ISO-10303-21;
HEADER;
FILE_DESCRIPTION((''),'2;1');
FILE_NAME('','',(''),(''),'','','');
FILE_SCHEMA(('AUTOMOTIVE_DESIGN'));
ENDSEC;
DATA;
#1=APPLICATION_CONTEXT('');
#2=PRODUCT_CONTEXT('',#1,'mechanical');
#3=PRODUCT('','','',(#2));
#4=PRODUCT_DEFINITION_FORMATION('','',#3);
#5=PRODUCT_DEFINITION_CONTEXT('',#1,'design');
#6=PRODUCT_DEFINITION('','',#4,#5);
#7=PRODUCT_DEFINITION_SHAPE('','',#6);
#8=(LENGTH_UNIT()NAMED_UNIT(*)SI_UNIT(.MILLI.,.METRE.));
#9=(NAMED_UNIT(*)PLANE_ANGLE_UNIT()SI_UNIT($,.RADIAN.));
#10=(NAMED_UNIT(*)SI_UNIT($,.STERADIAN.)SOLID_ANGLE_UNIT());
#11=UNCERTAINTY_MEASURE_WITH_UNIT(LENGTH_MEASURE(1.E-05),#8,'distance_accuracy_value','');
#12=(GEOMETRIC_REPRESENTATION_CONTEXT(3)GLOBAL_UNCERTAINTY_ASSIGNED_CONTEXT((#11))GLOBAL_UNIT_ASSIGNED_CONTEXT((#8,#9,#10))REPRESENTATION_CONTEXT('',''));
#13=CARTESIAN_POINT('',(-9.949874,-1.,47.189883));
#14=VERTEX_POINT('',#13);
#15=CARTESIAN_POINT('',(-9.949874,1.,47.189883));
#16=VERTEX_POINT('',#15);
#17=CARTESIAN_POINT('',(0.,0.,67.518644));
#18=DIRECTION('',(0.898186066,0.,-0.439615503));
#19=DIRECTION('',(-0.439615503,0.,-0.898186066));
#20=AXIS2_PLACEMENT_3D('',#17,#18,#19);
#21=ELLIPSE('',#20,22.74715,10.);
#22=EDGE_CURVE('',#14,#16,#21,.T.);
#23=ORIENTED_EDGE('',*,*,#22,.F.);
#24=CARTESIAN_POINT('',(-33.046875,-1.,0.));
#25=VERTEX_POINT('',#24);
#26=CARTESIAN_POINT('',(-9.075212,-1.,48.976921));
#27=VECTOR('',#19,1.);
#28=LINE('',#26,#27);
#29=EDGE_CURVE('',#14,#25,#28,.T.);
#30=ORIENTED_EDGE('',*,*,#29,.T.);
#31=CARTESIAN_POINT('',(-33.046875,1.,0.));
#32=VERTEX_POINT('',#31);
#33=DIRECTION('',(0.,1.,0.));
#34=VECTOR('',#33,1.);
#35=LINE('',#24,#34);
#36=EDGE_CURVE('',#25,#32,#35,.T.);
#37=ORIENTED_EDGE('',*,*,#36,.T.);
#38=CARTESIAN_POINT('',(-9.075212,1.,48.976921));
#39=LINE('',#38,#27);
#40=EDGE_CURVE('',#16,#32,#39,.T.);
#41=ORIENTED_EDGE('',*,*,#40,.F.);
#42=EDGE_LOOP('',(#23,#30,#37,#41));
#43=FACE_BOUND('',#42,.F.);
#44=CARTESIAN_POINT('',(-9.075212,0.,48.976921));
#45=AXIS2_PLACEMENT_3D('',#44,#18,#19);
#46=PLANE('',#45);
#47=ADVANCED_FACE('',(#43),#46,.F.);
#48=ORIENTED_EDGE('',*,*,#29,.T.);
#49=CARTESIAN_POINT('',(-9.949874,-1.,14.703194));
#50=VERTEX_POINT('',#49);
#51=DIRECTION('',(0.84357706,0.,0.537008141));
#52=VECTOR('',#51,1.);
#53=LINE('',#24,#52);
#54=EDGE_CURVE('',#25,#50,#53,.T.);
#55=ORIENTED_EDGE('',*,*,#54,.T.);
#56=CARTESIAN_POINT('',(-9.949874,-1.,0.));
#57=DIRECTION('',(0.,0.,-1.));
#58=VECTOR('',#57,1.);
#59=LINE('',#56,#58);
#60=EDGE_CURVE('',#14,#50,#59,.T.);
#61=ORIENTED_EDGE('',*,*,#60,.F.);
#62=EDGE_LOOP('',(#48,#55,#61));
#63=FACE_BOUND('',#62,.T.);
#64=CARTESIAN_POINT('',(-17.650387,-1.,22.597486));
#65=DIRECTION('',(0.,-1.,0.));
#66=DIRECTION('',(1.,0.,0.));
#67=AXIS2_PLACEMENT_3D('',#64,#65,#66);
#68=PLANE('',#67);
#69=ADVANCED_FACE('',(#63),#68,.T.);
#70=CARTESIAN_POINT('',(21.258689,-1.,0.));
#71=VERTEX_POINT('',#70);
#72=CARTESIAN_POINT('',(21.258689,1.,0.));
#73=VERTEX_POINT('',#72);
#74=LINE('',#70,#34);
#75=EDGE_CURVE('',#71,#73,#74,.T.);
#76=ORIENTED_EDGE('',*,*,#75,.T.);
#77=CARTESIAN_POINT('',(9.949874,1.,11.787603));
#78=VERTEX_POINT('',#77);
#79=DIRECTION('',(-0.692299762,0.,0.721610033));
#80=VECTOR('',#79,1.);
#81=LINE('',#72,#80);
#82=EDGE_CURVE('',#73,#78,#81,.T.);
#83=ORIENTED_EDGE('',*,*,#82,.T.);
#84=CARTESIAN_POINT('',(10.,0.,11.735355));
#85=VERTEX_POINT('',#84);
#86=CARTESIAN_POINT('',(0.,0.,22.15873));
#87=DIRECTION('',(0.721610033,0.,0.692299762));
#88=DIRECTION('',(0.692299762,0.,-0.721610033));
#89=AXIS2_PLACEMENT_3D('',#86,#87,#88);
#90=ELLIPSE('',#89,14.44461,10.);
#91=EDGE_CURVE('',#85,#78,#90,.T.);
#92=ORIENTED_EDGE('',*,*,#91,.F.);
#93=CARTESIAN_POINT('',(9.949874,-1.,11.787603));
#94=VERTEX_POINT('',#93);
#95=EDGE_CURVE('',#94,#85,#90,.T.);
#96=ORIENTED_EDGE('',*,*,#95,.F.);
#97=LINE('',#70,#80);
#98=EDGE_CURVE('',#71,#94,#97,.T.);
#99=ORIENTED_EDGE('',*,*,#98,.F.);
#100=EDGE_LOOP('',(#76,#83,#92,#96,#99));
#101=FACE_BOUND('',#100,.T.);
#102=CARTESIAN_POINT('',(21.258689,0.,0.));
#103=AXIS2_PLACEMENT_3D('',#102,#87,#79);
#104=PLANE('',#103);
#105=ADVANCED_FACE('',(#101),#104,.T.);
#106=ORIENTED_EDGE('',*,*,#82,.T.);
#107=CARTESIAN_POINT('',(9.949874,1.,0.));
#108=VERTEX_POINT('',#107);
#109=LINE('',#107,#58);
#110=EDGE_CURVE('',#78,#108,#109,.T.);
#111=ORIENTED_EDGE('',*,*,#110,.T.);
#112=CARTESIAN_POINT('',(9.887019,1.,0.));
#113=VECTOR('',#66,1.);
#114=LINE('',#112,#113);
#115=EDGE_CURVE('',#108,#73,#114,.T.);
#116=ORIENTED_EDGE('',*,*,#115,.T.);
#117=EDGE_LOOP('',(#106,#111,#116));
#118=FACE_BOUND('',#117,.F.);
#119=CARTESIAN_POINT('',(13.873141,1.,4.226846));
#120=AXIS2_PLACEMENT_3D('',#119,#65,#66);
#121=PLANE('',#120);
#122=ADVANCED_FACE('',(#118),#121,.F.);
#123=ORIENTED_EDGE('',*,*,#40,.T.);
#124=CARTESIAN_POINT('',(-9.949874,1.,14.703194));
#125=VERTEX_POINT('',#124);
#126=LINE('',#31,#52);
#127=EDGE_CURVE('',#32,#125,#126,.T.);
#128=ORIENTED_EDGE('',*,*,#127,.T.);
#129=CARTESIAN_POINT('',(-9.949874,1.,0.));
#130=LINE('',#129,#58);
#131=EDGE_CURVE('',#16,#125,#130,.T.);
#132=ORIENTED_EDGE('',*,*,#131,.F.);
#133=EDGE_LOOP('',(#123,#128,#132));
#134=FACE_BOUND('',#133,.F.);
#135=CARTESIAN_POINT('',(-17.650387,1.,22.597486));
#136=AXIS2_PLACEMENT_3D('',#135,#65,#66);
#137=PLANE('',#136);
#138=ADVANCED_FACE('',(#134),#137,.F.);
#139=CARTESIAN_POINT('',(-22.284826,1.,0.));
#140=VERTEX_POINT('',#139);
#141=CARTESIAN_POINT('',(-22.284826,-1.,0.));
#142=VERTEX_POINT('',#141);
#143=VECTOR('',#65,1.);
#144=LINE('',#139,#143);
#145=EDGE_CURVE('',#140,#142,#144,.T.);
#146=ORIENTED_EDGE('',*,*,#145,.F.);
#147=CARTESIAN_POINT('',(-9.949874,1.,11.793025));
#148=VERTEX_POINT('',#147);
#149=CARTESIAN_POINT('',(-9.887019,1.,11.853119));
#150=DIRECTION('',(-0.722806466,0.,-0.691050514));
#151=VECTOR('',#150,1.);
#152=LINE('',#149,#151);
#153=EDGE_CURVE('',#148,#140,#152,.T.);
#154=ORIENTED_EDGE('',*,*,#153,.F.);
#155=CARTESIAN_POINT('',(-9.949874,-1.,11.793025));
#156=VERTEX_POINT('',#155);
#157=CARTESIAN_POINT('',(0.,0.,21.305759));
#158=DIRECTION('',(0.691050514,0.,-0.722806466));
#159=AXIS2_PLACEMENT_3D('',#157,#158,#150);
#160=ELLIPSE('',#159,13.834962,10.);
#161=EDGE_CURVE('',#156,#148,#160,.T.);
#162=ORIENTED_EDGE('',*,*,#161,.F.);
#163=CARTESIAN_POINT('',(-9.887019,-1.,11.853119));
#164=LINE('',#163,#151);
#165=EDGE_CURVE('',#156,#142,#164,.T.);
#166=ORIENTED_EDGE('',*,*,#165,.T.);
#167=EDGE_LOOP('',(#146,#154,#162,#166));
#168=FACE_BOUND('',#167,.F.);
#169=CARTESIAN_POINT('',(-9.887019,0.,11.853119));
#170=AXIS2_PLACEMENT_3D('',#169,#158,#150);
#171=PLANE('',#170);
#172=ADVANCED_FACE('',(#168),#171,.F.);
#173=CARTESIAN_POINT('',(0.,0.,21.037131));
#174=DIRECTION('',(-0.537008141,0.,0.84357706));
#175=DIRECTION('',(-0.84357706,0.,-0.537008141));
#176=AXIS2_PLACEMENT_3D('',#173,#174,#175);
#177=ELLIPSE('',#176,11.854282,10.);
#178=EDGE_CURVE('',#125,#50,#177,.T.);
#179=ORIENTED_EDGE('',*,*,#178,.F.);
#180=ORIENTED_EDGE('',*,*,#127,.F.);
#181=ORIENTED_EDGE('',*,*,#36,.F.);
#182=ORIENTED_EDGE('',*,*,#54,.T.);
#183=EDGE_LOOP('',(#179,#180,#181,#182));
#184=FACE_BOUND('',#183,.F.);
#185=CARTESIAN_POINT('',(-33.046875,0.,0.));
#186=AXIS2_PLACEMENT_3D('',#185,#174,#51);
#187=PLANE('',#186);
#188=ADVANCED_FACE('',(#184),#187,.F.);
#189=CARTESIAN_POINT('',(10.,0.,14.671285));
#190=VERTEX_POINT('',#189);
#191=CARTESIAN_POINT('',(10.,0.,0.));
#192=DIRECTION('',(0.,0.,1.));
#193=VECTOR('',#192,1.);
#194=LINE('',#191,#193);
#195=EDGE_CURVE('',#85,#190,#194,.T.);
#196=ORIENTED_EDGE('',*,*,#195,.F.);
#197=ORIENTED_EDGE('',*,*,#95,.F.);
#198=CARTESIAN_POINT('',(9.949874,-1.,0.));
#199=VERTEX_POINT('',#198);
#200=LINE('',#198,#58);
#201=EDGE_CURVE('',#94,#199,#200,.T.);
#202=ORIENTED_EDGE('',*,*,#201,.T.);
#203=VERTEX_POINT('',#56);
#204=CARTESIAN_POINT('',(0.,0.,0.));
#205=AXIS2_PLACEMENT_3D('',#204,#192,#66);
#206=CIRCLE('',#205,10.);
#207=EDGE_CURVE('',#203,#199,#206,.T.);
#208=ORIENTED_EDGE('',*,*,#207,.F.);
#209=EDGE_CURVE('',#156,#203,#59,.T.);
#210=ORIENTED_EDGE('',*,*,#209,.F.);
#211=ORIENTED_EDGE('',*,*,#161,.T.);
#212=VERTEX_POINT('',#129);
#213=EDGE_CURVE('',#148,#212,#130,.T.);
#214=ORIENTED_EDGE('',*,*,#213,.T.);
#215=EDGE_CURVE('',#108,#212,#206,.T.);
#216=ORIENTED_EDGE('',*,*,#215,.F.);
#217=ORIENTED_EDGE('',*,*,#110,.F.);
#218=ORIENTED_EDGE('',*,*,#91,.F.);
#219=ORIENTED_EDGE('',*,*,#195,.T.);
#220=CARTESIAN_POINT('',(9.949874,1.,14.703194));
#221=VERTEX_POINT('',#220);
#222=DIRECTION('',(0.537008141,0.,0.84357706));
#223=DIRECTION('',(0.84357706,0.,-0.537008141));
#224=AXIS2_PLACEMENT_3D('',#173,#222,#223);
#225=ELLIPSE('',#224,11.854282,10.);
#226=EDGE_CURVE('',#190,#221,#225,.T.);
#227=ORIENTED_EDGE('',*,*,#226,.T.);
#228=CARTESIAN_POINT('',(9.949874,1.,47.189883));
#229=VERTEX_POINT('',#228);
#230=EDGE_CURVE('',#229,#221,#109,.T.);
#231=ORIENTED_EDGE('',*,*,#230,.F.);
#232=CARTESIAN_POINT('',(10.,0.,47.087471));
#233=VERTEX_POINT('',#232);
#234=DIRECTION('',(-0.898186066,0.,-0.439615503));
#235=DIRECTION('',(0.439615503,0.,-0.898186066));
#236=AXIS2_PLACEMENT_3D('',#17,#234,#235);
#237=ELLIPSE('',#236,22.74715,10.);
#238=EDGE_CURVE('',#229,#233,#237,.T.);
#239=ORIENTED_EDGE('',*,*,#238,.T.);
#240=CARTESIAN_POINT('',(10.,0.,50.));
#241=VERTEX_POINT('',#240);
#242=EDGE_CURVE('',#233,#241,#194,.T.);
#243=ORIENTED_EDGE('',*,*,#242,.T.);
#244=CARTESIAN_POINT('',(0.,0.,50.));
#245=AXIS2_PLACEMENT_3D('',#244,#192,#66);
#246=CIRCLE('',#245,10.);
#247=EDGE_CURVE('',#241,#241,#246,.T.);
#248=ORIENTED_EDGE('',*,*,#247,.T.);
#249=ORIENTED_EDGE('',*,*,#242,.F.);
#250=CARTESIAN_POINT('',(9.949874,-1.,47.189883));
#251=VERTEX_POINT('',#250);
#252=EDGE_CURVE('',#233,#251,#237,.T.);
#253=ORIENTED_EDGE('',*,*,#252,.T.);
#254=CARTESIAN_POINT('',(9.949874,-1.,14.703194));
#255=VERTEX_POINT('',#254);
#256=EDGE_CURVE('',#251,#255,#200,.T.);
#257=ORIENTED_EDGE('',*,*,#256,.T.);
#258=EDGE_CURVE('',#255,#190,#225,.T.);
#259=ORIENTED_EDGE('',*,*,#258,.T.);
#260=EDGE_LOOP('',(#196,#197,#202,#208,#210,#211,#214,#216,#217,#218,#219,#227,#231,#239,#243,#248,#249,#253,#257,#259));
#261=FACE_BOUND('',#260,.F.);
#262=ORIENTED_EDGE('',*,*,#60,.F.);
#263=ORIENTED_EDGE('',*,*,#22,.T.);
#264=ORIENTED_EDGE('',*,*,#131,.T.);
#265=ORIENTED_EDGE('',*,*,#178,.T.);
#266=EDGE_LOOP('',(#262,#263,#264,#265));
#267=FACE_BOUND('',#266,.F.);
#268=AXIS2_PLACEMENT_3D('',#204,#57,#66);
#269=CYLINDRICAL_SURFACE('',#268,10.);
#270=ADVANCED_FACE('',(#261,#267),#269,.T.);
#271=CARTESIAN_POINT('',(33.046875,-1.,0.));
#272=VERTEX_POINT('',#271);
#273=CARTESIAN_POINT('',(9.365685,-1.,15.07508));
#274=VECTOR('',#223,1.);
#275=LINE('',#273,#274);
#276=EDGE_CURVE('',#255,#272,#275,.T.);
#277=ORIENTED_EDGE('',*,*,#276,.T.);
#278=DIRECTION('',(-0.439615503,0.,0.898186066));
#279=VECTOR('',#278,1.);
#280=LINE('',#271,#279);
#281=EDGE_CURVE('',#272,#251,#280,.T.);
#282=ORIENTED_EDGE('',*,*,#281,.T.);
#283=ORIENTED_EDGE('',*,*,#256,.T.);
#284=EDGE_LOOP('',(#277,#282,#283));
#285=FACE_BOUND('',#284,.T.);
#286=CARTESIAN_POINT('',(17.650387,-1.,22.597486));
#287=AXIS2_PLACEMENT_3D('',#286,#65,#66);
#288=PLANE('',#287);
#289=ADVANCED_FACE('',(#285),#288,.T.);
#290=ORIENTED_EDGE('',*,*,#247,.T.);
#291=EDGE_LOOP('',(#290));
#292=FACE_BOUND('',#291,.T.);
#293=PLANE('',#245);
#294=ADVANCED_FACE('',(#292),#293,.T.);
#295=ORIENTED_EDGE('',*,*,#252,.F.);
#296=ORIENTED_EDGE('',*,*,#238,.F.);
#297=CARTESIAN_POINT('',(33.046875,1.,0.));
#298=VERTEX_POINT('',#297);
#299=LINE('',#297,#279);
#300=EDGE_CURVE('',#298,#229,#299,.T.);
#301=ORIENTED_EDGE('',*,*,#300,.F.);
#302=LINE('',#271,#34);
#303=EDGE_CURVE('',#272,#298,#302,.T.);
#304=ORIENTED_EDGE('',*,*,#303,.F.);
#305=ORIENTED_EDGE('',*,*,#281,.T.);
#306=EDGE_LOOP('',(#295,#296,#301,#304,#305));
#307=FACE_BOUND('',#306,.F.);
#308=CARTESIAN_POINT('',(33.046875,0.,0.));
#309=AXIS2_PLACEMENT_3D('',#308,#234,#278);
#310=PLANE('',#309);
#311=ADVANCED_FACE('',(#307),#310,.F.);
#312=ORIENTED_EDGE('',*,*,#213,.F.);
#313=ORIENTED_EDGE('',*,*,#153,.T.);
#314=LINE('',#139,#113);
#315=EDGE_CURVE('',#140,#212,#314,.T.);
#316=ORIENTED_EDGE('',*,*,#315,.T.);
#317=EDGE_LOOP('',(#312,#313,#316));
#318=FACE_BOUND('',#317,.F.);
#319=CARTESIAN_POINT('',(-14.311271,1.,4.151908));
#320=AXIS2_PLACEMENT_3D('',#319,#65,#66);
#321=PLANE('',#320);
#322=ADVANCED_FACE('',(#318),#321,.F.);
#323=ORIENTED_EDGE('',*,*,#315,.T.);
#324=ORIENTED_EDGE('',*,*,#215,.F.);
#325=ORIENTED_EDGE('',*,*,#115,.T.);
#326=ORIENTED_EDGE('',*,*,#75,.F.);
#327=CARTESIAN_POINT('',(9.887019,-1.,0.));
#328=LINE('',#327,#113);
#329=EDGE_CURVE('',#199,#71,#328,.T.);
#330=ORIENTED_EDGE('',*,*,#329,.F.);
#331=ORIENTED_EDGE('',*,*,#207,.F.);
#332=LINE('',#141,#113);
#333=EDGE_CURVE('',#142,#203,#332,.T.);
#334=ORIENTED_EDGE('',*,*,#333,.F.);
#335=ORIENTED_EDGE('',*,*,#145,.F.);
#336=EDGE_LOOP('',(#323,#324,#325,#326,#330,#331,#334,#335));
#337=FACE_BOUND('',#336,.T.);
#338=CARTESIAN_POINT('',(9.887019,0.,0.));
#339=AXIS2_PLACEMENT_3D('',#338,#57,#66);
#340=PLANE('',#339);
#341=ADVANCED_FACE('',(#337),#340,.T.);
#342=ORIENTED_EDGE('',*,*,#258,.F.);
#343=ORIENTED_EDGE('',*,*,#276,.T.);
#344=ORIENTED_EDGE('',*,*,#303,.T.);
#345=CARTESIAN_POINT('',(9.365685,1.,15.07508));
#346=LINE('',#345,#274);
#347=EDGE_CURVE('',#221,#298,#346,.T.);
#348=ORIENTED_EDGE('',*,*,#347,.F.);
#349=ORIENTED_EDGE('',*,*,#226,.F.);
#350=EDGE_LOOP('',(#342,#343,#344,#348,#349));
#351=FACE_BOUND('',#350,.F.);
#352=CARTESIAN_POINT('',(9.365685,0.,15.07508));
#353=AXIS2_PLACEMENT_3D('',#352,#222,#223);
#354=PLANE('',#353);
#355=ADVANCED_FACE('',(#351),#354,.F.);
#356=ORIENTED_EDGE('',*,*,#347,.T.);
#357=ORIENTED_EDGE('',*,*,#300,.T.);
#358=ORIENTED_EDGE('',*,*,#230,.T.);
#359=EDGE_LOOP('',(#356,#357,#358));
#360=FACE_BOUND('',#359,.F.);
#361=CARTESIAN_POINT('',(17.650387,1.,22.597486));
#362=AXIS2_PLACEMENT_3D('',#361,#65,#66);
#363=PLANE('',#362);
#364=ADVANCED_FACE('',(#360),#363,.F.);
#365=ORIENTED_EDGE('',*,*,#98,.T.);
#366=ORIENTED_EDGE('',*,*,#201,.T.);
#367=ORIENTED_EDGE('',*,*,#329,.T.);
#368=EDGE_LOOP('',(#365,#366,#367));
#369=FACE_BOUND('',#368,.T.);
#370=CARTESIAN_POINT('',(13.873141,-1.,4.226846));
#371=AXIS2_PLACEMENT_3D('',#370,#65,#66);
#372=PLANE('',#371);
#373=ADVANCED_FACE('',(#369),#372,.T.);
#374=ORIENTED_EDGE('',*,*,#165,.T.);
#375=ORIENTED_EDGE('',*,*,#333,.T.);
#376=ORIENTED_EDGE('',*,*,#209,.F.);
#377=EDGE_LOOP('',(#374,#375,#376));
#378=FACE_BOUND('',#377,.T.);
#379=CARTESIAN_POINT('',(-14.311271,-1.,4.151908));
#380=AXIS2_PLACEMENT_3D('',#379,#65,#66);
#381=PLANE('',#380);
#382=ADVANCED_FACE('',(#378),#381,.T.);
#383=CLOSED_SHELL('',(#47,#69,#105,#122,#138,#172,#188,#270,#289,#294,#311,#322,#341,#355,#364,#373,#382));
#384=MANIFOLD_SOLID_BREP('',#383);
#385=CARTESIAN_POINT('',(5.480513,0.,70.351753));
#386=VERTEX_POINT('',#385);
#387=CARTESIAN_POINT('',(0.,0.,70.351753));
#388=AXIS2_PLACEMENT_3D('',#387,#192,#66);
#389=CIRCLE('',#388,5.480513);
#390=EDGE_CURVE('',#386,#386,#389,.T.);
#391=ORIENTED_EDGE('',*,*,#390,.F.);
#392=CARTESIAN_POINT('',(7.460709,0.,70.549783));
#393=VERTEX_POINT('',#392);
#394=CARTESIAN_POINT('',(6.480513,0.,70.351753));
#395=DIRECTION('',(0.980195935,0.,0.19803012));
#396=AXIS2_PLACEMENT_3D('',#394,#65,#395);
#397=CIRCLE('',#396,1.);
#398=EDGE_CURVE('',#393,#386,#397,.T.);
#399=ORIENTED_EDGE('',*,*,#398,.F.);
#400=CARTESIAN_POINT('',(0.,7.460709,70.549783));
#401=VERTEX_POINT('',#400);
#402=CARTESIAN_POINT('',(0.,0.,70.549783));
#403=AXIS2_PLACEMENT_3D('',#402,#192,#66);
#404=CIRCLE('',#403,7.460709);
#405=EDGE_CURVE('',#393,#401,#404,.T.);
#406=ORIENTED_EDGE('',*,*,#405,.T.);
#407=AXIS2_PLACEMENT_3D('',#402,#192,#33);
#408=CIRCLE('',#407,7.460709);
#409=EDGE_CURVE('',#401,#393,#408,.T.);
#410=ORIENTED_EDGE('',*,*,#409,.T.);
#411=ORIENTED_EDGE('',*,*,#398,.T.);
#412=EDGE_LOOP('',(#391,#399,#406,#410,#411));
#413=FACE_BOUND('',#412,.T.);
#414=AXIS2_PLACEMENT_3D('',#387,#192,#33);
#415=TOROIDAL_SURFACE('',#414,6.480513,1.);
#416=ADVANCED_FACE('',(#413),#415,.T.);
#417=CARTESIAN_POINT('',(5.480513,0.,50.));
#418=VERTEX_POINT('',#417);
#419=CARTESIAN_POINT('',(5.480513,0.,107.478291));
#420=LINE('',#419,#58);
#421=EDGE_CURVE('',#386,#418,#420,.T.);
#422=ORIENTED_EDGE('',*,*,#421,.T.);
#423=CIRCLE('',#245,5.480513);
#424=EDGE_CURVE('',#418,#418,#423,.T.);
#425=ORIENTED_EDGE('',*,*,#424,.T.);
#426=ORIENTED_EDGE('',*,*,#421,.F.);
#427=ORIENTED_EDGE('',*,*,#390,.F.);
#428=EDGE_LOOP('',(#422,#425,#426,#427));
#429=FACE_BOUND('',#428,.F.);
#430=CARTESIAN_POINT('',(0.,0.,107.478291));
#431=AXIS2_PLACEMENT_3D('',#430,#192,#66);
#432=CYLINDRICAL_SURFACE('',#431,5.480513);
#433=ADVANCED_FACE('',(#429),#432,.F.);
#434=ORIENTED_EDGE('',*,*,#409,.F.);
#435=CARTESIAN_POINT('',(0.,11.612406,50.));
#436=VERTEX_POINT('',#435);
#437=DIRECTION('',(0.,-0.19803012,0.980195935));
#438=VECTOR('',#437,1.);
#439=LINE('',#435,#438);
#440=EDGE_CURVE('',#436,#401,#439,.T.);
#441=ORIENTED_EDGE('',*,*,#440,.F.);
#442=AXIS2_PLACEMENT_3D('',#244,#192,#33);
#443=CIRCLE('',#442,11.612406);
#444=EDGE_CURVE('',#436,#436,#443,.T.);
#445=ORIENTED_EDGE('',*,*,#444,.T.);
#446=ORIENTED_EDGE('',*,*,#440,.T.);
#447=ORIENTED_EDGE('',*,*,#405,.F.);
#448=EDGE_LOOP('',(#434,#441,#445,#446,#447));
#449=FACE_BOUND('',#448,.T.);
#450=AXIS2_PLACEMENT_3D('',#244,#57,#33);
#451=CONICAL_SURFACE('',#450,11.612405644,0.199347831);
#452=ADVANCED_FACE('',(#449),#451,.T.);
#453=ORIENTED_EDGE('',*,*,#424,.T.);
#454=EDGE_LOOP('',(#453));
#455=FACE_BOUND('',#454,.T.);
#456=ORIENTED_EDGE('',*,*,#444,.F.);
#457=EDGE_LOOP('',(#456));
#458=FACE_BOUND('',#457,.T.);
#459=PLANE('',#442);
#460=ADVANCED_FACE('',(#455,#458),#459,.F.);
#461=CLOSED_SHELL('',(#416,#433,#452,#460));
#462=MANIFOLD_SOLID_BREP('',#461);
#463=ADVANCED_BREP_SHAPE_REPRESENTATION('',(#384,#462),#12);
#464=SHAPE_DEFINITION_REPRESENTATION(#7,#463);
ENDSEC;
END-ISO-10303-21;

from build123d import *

# Parameters (mm, degrees)
F0_R        = 10
F1_DEPTH    = 50
F5_DEPTH    = 1
F7_R        = 5.4805132886
F8_DEPTH    = 107.4792907963
F9_T3_ANGLE = 270
F9_T6_ANGLE = 90


# Not quite as in the source:
# - a fillet or chamfer that OpenCascade refuses, or shapes differently, is made with other operations: its cross-section is extruded or revolved along the edge and cut away or added


with BuildPart() as f1:
    # F0 (on Top) → F1 (new body)
    with BuildSketch(Plane.XY):
        Circle(F0_R)
    extrude(amount=F1_DEPTH)

    # F4 (on Front) → F5 (join, symmetric)
    with BuildSketch(Plane.XZ):
        Polygon((-9.3656852841, 15.0750800967), (-9.0752122924, 48.9769205451), (-33.046875149, 0), align=None)
        Polygon((33.046875149, 0), (9.0752122924, 48.9769205451), (9.3656852841, 15.0750800967), align=None)
        Polygon((-9.8870191723, 11.8531188655), (-22.2848262638, 0), (-9.8870191723, 0), align=None)
        Polygon((21.2586894631, 0), (9.8870191723, 11.8531188655), (9.8870191723, 0), align=None)
    extrude(amount=F5_DEPTH, both=True)


with BuildPart() as f3:
    # F2 (on Right) → F3 (revolve)
    with BuildSketch(Plane.YZ):
        Polygon((0, 50), (11.6124056444, 50), (0, 107.4782907963), align=None)
    revolve(axis=Axis((0, 0, 78.7391453981), (0, 0, 1)))

    # F7 (on face) → F8 (cut, through all)
    with BuildSketch(Plane.XY.offset(107.4782907963)):
        Circle(F7_R)
    extrude(amount=-F8_DEPTH, mode=Mode.SUBTRACT)

    # F9: fillet of radius 1 on 2 edges, made by hand


with BuildPart() as f9_tool1:
    # F9_s2 → F9_t3 (revolve)
    with BuildSketch(Plane.YZ):
        with BuildLine():
            ThreePointArc((7.4607092239, 70.5497828324), (6.3810043326, 71.3467893791), (5.4805132886, 70.3517527126))
            Line((5.4805132886, 70.3517527126), (5.4805132886, 80.3512211639))
            Line((5.4805132886, 80.3512211639), (7.4607092239, 70.5497828324))
        make_face()
    revolve(axis=Axis((0, 0, 80.3512211639), (0, 0, 1)), revolution_arc=F9_T3_ANGLE)


with BuildPart() as f9_tool4:
    # F9_s5 → F9_t6 (revolve)
    with BuildSketch(Plane.XZ):
        with BuildLine():
            ThreePointArc((7.4607092239, 70.5497828324), (6.3810043326, 71.3467893791), (5.4805132886, 70.3517527126))
            Line((5.4805132886, 70.3517527126), (5.4805132886, 80.3512211639))
            Line((5.4805132886, 80.3512211639), (7.4607092239, 70.5497828324))
        make_face()
    revolve(axis=Axis((0, 0, 80.3512211639), (0, 0, 1)), revolution_arc=F9_T6_ANGLE)


with BuildPart() as f3_1:
    add(f3.part)

    # F9_t7: cut F9_tool1, F9_tool4
    add([f9_tool1.part, f9_tool4.part], mode=Mode.SUBTRACT)


solid = Compound([f1.part, f3_1.part])
